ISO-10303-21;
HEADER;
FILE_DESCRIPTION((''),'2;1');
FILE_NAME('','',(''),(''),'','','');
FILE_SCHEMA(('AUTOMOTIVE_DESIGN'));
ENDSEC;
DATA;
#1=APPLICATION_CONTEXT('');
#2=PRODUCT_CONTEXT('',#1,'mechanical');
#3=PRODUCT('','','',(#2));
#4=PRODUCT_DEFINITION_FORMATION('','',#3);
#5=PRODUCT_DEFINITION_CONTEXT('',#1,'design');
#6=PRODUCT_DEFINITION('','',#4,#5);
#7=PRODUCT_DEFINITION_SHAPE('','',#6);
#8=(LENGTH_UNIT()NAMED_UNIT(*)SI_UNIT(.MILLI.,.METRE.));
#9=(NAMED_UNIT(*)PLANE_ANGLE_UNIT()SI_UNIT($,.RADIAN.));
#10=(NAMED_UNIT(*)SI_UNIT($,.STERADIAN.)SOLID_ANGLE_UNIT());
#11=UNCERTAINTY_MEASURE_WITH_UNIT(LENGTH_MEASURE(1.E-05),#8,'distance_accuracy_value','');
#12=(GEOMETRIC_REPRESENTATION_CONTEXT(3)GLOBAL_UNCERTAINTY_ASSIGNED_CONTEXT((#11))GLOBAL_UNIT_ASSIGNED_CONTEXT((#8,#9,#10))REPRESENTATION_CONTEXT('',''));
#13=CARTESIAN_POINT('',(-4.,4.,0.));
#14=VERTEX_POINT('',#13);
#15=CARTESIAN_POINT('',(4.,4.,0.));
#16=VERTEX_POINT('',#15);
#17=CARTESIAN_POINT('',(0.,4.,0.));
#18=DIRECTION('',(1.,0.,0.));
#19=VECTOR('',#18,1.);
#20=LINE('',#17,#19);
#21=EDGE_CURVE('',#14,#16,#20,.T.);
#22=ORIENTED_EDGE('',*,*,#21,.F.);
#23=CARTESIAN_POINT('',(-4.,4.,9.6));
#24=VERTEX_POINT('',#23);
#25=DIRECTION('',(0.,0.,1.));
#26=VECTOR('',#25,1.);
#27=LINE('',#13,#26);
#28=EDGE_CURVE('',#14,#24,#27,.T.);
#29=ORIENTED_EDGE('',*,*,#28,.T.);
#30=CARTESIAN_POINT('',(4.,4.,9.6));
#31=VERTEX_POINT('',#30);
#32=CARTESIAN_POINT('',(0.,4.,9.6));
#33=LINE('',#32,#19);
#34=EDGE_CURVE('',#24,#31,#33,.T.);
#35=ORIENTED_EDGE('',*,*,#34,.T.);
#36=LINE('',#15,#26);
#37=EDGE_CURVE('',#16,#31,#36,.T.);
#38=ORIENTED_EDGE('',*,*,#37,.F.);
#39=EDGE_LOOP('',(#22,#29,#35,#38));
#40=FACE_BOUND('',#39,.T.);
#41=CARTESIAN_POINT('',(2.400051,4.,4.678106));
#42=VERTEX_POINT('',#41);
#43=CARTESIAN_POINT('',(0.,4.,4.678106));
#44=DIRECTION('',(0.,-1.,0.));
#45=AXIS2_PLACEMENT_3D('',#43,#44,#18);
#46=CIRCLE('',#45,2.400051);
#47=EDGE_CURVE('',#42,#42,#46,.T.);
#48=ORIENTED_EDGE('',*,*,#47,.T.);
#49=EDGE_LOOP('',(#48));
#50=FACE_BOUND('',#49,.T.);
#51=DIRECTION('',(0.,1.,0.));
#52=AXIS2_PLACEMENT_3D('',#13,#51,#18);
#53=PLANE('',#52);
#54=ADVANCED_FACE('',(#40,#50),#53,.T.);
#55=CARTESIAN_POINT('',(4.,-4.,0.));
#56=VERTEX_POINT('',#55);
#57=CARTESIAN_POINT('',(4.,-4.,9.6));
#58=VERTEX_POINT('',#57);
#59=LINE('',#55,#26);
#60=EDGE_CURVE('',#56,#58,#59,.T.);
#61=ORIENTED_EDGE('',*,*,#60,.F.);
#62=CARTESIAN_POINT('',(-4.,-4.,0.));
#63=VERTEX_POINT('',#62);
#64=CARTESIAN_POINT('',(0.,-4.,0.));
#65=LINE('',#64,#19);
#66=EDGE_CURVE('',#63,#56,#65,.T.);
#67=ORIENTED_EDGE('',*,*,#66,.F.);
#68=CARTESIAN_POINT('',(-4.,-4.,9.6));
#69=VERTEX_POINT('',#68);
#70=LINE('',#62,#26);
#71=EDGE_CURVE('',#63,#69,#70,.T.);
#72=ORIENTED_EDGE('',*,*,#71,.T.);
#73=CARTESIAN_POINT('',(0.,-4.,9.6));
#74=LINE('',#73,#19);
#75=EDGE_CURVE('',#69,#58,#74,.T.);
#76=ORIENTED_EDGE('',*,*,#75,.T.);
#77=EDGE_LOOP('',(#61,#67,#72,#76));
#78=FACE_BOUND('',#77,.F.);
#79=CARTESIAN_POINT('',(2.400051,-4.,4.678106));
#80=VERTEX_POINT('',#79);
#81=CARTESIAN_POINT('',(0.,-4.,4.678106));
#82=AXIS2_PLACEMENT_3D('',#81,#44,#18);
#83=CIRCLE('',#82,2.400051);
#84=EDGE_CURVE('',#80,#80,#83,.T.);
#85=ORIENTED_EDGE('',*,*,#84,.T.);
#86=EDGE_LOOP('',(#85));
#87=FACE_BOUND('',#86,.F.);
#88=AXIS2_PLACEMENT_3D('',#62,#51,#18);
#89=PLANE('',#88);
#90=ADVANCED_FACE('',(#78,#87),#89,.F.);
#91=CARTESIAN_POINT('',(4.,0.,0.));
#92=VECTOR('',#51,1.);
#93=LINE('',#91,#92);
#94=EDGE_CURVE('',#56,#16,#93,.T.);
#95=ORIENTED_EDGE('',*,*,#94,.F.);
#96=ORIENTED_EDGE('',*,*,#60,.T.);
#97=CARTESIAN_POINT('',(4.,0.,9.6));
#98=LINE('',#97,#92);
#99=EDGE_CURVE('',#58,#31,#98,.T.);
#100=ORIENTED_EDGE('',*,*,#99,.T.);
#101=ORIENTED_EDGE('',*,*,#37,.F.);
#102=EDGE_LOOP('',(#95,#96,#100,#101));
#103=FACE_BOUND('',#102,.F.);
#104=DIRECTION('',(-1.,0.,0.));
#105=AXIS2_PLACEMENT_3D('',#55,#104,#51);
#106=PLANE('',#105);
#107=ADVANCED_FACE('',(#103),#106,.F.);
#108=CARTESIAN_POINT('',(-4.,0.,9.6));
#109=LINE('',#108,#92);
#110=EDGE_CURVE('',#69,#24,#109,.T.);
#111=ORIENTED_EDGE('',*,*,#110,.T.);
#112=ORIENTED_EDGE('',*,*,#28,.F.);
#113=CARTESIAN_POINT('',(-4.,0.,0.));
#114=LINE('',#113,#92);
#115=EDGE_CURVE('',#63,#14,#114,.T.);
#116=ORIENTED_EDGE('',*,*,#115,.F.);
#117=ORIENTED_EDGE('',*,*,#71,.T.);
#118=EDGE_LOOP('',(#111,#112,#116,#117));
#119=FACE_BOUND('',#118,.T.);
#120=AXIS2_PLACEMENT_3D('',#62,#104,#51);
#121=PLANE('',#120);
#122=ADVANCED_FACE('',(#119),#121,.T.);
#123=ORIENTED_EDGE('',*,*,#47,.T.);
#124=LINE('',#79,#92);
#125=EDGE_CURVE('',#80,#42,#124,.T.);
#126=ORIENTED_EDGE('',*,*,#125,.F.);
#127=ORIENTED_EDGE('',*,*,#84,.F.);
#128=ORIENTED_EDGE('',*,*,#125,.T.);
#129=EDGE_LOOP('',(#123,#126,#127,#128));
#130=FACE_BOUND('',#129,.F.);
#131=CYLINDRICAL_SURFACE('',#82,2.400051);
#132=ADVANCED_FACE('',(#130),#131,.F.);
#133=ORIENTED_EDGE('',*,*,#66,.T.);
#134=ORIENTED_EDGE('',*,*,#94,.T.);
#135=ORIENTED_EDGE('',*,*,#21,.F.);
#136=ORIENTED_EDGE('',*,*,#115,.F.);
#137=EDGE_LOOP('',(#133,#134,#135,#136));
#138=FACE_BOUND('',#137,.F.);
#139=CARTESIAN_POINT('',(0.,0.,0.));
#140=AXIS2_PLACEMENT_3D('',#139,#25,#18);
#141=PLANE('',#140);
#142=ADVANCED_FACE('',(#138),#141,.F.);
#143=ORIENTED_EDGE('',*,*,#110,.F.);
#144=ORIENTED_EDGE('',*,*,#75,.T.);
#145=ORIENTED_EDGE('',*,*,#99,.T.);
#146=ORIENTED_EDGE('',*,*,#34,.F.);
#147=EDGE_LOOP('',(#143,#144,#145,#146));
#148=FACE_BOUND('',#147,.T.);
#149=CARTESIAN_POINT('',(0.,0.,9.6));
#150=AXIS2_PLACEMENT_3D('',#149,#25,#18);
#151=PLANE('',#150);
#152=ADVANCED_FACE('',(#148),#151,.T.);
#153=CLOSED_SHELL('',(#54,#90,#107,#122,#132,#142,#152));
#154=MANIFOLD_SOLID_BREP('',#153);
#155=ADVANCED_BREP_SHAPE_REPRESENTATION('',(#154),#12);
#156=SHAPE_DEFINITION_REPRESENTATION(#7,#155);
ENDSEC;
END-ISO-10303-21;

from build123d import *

# Parameters (mm, degrees)
F0_W     = 8
F0_H     = 8
F1_DEPTH = 9.6
F2_R     = 2.4000510118
F3_DEPTH = 25


# Not quite as in the source:
# - the program builds the solid bodies; features that only make, move or delete a surface that nothing else refers to are left out


with BuildPart() as f1:
    # F0 (on Top) → F1 (new body)
    with BuildSketch(Plane.XY):
        Rectangle(F0_W, F0_H)
    extrude(amount=F1_DEPTH)

    # F2 (on face) → F3 (cut)
    with BuildSketch(Plane.XZ.offset(4)):
        with Locations((0, 4.6781064011)):
            Circle(F2_R)
    extrude(amount=-F3_DEPTH, mode=Mode.SUBTRACT)


solid = f1.part
